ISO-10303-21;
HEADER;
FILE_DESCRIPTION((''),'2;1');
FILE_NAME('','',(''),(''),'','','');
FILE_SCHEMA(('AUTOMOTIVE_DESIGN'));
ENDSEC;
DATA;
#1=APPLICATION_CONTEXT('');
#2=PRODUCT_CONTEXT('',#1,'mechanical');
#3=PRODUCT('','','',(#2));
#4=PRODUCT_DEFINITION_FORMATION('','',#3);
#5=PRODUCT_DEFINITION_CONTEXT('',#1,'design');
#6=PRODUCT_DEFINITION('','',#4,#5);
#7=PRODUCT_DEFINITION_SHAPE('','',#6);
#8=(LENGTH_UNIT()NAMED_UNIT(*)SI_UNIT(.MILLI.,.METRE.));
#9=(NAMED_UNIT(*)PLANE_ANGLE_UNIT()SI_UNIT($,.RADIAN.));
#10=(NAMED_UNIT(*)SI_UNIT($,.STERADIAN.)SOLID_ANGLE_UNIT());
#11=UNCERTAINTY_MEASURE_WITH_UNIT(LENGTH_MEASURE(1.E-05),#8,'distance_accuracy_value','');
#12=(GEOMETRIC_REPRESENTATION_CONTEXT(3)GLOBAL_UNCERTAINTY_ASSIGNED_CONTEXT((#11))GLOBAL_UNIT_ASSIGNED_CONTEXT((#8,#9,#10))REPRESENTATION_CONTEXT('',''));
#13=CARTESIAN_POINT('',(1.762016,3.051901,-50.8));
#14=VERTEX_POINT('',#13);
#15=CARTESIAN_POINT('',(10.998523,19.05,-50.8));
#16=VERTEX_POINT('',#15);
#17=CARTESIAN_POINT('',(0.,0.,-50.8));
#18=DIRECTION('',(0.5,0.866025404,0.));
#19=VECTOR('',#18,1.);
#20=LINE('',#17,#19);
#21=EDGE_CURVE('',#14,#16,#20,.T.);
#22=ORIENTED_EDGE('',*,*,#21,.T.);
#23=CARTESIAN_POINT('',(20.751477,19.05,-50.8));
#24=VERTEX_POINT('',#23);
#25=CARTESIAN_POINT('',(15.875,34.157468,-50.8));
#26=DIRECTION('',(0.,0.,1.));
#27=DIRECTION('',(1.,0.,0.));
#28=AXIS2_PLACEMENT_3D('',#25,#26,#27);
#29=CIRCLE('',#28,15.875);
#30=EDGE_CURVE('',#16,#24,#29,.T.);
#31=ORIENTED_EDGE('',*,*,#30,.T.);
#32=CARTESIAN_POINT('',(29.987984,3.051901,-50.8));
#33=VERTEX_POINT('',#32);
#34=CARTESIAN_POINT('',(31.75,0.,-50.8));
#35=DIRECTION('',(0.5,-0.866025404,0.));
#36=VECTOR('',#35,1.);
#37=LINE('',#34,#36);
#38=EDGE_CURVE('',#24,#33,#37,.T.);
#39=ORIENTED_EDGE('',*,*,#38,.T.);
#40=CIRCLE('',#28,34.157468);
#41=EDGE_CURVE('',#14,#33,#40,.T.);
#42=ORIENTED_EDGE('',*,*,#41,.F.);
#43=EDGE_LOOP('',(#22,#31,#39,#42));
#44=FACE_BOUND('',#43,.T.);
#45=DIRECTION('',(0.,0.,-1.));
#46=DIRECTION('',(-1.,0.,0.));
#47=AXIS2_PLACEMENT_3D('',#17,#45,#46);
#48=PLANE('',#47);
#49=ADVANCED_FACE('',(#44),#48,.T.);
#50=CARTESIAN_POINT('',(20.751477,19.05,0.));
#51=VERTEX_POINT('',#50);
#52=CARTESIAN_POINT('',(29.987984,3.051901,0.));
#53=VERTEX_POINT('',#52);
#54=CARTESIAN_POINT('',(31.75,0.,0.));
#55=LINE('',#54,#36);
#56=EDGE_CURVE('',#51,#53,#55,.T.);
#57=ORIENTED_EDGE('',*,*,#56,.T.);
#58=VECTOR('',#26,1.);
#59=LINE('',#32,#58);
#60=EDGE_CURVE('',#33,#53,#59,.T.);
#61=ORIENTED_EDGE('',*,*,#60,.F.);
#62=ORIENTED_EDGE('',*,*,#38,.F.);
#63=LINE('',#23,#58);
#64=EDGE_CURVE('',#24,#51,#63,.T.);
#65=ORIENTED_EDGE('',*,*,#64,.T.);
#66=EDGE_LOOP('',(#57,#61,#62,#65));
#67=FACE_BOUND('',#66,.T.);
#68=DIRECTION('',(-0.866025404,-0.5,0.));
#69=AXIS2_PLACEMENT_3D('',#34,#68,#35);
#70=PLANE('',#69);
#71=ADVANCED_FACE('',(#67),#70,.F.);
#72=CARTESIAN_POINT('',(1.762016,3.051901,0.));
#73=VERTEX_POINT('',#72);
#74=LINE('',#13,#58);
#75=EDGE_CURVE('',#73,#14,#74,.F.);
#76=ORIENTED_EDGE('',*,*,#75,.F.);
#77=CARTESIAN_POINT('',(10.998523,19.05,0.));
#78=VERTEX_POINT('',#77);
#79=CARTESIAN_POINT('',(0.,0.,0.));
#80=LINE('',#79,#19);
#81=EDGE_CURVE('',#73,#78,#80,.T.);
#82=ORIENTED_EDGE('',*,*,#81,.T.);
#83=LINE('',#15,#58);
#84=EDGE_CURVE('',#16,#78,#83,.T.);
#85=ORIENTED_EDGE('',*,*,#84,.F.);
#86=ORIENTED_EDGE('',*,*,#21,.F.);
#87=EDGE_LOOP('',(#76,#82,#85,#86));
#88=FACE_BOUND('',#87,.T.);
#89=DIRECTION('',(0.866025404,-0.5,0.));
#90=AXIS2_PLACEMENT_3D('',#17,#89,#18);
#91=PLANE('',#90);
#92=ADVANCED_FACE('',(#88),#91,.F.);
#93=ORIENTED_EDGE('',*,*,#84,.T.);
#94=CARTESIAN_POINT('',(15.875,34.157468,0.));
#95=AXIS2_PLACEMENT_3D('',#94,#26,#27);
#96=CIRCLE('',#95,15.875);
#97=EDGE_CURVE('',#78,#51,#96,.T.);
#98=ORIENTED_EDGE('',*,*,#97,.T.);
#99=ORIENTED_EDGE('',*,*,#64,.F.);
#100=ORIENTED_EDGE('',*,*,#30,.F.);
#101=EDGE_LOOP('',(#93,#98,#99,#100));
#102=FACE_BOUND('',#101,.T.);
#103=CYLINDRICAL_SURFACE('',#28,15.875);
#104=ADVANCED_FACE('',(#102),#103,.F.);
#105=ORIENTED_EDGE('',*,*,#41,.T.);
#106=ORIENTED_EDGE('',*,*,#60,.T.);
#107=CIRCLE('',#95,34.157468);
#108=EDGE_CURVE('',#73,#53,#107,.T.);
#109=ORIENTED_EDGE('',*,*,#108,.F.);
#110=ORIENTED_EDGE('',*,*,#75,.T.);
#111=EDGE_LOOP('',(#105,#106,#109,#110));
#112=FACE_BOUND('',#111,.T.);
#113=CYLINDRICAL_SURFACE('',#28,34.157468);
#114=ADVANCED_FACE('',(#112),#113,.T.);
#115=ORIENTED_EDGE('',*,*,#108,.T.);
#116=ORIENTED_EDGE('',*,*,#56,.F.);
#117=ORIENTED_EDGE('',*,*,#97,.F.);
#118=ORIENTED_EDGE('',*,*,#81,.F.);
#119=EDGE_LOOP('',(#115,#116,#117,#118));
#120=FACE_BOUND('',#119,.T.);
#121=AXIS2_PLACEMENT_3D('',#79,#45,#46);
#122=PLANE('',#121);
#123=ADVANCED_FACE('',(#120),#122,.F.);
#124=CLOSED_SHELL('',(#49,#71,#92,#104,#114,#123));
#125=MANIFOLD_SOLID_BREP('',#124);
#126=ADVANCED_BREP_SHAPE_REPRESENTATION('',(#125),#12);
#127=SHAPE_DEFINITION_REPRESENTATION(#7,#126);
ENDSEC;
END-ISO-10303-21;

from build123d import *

# Parameters (mm, degrees)
SKETCH1_W           = 31.75
SKETCH1_H           = 19.05
BOSS_EXTRUDE1_DEPTH = 50.8
CUT_EXTRUDE1_DEPTH  = 63.861792847
CUT_EXTRUDE2_START  = -50.8
CUT_EXTRUDE2_DEPTH  = 50.8


# Read off the part's stored shape, not the designer's step: Cut-Extrude2
with BuildPart() as part:
    # Sketch1 → Boss-Extrude1 (new body)
    with BuildSketch(Plane.XY):
        with Locations((15.875, 9.525)):
            Rectangle(SKETCH1_W, SKETCH1_H)
    extrude(amount=-BOSS_EXTRUDE1_DEPTH)

    # Sketch2 → Cut-Extrude1 (cut, through all)
    with BuildSketch(Plane.XY):
        Polygon((0, 19.05), (0, 0), (10.998522628, 19.05), align=None)
        Polygon((31.75, 19.05), (31.75, 0), (20.751477372, 19.05), align=None)
    extrude(amount=-CUT_EXTRUDE1_DEPTH, mode=Mode.SUBTRACT)

    # Cut-Extrude2 outline → Cut-Extrude2 (cut)
    with BuildSketch(Plane.XY.offset(CUT_EXTRUDE2_START)):
        with BuildLine():
            Line((20.751477372, 19.05), (10.998522628, 19.05))
            ThreePointArc((10.998522628, 19.05), (15.875, 18.282468135), (20.751477372, 19.05))
        make_face()
        with BuildLine():
            ThreePointArc((15.875, 0), (8.655401308, 0.77169236), (1.762015854, 3.051900982))
            Line((1.762015854, 3.051900982), (0, 0))
            Line((0, 0), (15.875, 0))
        make_face()
        with BuildLine():
            Line((31.75, 0), (29.987984146, 3.051900982))
            ThreePointArc((29.987984146, 3.051900982), (23.094598692, 0.77169236), (15.875, 0))
            Line((15.875, 0), (31.75, 0))
        make_face()
    extrude(amount=CUT_EXTRUDE2_DEPTH, mode=Mode.SUBTRACT)


solid = part.part
